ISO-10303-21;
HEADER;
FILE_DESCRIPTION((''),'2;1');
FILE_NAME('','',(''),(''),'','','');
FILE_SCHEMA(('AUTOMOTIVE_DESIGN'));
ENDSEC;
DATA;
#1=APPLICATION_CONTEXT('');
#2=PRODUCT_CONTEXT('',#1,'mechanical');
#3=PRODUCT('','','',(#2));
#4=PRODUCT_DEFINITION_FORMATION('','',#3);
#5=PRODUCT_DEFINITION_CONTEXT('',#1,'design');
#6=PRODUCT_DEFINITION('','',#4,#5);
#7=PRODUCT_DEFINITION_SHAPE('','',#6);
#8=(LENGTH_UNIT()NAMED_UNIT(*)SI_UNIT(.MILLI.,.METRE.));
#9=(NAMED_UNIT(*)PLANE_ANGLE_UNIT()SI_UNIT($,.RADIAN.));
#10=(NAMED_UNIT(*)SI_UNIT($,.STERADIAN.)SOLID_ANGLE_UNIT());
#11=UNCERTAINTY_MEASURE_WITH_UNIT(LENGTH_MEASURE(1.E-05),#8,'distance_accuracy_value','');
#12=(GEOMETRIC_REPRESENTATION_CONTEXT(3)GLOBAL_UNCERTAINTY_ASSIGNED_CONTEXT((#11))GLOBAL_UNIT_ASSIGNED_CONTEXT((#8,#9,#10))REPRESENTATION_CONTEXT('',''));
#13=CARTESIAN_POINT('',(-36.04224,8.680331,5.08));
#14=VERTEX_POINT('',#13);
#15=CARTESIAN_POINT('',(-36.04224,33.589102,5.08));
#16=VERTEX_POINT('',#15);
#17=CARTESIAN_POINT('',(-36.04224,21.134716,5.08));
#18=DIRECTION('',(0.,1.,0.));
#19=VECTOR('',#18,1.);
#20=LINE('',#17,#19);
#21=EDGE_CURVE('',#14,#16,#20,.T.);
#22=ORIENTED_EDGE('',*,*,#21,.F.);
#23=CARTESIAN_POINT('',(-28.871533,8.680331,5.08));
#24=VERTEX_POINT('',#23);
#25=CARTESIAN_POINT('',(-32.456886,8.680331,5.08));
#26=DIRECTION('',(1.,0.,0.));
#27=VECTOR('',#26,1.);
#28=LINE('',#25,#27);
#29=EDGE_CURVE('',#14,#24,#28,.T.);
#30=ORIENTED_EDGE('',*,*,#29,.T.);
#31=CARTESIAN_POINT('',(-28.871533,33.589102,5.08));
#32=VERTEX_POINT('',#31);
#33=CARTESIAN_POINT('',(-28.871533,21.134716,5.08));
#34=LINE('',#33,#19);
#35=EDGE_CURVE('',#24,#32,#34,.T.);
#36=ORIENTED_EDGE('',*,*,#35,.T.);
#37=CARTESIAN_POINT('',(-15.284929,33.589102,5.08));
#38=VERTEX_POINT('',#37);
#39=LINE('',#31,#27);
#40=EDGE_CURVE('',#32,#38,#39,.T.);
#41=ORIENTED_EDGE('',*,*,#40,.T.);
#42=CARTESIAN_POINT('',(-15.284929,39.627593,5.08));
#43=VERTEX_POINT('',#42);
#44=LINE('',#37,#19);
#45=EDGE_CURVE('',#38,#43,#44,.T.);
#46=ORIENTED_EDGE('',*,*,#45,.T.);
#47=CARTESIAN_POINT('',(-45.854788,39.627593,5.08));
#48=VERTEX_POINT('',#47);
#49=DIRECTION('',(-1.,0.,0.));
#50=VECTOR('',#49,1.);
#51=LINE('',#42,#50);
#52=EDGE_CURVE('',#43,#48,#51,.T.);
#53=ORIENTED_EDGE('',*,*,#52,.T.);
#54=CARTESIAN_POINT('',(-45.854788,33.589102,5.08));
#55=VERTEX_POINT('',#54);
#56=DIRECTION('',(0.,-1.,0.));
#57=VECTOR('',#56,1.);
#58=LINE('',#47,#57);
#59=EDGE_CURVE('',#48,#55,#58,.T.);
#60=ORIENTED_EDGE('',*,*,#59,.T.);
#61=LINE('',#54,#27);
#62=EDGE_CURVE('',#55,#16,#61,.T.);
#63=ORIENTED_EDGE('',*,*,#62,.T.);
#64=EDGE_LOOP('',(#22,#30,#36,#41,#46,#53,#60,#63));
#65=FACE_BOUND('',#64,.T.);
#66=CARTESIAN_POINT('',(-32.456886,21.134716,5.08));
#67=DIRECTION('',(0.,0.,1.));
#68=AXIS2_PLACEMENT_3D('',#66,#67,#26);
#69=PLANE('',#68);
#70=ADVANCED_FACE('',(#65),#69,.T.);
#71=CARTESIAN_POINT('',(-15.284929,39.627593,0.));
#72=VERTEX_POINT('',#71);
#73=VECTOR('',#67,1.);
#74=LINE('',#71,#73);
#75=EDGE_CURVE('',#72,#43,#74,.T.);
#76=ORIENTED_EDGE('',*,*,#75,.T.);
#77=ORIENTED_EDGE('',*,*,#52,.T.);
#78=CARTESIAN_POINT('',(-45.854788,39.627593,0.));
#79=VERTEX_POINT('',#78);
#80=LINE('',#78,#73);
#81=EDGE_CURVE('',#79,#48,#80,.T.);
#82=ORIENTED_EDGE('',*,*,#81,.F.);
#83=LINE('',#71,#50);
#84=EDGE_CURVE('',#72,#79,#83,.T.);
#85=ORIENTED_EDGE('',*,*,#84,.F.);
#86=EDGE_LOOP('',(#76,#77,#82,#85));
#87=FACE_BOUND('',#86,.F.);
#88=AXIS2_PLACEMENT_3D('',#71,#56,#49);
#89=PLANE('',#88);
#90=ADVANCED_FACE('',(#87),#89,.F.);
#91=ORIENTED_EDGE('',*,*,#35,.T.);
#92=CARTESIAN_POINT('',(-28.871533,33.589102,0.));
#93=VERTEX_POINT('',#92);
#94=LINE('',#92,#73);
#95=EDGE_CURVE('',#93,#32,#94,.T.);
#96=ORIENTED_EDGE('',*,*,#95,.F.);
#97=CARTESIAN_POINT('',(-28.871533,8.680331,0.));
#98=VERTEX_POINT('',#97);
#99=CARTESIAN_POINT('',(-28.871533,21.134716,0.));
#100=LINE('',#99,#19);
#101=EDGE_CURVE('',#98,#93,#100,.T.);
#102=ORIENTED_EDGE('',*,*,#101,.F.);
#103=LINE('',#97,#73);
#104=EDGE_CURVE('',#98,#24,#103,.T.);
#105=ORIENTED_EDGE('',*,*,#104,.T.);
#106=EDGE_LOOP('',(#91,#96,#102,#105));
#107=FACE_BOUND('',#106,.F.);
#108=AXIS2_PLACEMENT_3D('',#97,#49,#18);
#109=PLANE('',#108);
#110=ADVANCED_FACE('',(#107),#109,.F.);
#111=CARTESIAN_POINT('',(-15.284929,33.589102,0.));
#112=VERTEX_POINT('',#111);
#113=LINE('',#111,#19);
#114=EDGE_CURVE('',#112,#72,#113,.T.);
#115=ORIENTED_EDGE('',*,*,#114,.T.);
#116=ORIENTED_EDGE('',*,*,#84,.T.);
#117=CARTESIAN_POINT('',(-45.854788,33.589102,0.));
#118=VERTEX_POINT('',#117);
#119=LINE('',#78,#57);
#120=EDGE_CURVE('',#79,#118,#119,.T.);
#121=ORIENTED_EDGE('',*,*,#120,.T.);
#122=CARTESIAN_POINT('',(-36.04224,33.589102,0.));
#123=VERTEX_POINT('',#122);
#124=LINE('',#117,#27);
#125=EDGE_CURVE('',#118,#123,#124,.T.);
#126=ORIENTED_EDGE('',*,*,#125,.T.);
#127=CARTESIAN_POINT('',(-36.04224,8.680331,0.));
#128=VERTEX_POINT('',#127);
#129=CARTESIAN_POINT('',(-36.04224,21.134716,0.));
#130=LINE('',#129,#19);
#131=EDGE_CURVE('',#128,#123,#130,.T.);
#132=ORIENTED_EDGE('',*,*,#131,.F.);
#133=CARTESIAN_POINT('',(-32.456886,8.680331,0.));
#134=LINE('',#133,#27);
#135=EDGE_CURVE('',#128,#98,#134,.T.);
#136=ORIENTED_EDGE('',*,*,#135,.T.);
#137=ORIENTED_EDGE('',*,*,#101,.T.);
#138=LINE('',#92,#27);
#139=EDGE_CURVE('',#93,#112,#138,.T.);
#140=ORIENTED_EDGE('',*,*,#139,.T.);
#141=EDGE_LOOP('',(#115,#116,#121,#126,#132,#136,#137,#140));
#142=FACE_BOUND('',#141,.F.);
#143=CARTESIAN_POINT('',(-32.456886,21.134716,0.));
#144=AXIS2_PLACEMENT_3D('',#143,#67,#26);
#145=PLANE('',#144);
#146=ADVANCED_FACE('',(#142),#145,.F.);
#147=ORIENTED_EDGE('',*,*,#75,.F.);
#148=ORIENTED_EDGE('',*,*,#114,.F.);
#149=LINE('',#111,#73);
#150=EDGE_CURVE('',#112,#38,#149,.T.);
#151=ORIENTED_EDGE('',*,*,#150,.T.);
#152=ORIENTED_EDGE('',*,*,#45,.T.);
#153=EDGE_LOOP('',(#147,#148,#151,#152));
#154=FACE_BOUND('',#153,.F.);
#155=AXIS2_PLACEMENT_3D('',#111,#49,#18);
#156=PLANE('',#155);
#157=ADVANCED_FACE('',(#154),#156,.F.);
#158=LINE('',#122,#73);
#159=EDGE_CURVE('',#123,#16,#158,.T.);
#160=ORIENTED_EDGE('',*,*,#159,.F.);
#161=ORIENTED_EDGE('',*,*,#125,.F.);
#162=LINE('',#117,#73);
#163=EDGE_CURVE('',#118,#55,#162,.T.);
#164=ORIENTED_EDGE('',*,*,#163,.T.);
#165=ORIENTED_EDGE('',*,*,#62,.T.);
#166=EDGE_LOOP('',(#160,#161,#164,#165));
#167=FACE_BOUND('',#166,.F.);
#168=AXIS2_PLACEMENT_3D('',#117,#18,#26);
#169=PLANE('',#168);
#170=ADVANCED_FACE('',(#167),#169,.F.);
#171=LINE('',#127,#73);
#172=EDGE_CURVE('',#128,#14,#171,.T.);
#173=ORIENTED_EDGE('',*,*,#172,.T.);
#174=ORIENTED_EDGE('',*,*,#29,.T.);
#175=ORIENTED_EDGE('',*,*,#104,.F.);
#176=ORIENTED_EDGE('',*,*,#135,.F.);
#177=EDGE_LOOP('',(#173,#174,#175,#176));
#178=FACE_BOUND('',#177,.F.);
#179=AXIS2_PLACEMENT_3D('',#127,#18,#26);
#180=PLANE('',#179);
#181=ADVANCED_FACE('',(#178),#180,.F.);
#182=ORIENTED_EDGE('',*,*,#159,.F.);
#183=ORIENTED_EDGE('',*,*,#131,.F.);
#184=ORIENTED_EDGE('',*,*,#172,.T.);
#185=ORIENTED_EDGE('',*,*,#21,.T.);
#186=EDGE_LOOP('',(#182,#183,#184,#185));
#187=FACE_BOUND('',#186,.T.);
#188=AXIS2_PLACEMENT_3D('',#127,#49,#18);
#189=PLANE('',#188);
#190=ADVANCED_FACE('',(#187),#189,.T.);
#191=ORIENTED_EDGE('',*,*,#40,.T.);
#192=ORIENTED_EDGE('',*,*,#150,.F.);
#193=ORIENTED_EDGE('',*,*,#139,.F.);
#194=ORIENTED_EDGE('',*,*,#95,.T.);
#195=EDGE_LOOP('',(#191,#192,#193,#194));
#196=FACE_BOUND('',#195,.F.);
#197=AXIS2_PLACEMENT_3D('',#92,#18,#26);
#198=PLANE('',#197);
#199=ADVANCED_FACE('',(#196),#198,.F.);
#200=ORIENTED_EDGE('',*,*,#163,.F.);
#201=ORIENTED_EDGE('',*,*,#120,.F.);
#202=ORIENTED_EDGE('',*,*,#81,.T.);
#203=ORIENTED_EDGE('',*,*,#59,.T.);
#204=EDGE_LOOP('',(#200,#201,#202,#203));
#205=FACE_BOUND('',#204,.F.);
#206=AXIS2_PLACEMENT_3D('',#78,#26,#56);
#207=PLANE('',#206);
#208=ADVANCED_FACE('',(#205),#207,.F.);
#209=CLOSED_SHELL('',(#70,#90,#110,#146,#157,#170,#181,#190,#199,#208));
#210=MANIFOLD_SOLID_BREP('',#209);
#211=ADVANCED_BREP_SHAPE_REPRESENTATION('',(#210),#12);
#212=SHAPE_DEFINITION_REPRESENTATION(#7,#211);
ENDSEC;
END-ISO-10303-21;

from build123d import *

# Parameters (mm, degrees)
F0_W     = 7.1707069874
F0_H     = 24.9087717384
F1_DEPTH = 5.08


# Not quite as in the source:
# - the program builds the solid bodies; features that only make, move or delete a surface that nothing else refers to are left out


with BuildPart() as f1:
    # F0 (on Top) → F1 (new body)
    with BuildSketch(Plane.XY):
        with Locations((-32.4568860233, 21.1347164586)):
            Rectangle(F0_W, F0_H)
        Polygon((-15.2849294245, 39.6275930107), (-45.8547882736, 39.6275930107), (-45.8547882736, 33.5891023278), (-36.042239517, 33.5891023278), (-28.8715325296, 33.5891023278), (-15.2849294245, 33.5891023278), align=None)
    extrude(amount=F1_DEPTH)


solid = f1.part
